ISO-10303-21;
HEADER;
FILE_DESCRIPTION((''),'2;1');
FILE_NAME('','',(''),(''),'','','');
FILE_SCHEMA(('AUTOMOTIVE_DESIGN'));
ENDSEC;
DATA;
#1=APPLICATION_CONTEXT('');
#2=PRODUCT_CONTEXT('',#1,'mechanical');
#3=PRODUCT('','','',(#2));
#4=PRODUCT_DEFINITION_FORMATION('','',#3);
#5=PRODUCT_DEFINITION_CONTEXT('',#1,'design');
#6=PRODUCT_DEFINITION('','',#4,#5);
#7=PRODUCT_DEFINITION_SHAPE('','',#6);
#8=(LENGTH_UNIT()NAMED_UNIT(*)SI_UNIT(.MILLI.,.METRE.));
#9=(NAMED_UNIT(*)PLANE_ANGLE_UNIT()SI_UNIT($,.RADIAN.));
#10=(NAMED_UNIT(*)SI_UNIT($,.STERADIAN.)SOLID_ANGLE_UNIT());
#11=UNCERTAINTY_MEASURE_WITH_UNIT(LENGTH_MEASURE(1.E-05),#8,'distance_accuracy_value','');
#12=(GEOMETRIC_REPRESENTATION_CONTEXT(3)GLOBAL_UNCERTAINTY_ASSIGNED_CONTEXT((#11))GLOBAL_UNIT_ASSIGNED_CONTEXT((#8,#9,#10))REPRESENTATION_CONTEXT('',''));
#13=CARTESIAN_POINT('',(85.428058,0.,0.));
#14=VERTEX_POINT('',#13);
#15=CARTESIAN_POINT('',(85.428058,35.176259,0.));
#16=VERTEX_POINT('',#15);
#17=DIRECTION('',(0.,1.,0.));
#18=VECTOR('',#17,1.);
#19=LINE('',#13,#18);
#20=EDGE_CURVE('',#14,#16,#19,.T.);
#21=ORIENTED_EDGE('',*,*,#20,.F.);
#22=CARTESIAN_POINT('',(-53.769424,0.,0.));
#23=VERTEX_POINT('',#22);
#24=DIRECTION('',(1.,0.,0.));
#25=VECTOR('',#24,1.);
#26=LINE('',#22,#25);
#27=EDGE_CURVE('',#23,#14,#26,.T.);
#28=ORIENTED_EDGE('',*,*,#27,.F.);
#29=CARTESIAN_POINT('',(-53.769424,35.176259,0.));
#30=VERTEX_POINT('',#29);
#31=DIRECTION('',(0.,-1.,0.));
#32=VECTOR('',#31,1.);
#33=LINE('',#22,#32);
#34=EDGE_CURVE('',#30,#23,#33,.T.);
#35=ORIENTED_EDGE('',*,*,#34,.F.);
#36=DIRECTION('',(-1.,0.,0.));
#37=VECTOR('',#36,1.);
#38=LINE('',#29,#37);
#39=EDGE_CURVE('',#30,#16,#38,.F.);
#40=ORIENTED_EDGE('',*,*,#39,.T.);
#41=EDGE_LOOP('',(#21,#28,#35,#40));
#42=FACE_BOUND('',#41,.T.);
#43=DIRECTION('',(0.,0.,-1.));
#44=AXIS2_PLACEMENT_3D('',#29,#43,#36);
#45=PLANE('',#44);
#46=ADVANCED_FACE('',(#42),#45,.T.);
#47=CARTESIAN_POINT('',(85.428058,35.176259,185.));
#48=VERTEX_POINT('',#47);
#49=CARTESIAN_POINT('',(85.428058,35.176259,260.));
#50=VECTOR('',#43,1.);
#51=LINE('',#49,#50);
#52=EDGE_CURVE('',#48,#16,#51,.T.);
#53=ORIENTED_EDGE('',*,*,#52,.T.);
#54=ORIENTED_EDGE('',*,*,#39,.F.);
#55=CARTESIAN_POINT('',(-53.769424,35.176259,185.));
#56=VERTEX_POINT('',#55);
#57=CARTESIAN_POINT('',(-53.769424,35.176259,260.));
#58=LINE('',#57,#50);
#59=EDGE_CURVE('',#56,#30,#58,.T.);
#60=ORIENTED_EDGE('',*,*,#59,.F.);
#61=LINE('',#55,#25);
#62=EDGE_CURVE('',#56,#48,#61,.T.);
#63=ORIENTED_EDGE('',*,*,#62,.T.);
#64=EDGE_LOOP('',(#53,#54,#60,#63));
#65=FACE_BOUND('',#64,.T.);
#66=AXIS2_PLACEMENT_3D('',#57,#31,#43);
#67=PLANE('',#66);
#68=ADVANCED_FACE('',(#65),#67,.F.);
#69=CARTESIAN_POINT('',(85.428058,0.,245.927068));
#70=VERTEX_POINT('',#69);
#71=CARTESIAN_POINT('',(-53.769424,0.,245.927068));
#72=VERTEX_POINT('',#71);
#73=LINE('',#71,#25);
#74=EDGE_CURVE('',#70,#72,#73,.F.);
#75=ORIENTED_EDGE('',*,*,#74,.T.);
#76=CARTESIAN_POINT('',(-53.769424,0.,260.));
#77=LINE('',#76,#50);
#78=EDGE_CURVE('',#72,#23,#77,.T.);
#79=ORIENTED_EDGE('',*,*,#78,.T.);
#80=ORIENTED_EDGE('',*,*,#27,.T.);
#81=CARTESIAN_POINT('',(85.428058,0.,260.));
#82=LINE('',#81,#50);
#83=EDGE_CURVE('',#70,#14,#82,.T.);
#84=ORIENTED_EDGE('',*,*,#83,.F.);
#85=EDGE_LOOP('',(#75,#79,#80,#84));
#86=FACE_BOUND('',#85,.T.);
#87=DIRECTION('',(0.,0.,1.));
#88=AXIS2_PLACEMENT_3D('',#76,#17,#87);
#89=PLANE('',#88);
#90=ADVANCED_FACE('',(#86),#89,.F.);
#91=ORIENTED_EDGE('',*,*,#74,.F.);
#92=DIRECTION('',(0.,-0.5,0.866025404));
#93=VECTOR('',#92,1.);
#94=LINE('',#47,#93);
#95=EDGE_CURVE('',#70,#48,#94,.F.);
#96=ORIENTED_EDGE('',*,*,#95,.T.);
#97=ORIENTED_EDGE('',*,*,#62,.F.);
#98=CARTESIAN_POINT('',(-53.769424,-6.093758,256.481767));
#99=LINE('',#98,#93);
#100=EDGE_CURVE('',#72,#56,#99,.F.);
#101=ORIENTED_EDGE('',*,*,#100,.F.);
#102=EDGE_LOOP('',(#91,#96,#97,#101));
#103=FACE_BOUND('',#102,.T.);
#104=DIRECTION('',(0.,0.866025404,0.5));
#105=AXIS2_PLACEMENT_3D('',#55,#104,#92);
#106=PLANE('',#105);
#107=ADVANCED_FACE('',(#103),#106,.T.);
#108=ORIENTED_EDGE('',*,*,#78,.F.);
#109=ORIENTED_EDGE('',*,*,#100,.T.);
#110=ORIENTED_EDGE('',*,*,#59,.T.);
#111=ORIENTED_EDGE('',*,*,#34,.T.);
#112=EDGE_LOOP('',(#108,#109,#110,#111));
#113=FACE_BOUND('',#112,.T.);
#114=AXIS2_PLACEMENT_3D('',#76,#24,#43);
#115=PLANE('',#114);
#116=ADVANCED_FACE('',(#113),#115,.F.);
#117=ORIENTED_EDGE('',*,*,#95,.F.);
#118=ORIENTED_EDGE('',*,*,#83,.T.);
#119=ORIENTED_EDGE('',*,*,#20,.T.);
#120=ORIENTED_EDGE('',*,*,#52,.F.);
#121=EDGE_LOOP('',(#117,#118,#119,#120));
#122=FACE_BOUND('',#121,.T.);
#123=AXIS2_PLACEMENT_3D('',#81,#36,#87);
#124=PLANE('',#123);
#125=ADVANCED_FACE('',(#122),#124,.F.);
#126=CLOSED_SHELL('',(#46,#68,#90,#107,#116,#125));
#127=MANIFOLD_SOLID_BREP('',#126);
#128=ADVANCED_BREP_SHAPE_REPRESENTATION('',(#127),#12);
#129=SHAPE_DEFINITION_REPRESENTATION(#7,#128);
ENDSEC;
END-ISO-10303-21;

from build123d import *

# Parameters (mm, degrees)
SKETCH_1_W        = 139.197482014
SKETCH_1_H        = 35.176258993
EXTRUDE_160_DEPTH = 260
DRAFT3_START      = 122.963533898
DRAFT3_OUTLINE_W  = 139.197482014
DRAFT3_OUTLINE_H  = 86
DRAFT3_DEPTH      = 37.5


# Read off the part's stored shape, not the designer's step: Draft3
with BuildPart() as part:
    # Эскиз1 → Extrude 160 (new body)
    with BuildSketch(Plane.XY):
        with Locations((15.829316547, 17.588129497)):
            Rectangle(SKETCH_1_W, SKETCH_1_H)
    extrude(amount=EXTRUDE_160_DEPTH)

    # Draft3 outline → Draft3 (cut)
    with BuildSketch(Plane(origin=(0, 0, 0), x_dir=(1, 0, 0), z_dir=(0, 0.866025403784438, 0.500000000000001)).offset(DRAFT3_START)):
        with Locations((15.829316547, -184)):
            Rectangle(DRAFT3_OUTLINE_W, DRAFT3_OUTLINE_H)
    extrude(amount=DRAFT3_DEPTH, mode=Mode.SUBTRACT)


solid = part.part
